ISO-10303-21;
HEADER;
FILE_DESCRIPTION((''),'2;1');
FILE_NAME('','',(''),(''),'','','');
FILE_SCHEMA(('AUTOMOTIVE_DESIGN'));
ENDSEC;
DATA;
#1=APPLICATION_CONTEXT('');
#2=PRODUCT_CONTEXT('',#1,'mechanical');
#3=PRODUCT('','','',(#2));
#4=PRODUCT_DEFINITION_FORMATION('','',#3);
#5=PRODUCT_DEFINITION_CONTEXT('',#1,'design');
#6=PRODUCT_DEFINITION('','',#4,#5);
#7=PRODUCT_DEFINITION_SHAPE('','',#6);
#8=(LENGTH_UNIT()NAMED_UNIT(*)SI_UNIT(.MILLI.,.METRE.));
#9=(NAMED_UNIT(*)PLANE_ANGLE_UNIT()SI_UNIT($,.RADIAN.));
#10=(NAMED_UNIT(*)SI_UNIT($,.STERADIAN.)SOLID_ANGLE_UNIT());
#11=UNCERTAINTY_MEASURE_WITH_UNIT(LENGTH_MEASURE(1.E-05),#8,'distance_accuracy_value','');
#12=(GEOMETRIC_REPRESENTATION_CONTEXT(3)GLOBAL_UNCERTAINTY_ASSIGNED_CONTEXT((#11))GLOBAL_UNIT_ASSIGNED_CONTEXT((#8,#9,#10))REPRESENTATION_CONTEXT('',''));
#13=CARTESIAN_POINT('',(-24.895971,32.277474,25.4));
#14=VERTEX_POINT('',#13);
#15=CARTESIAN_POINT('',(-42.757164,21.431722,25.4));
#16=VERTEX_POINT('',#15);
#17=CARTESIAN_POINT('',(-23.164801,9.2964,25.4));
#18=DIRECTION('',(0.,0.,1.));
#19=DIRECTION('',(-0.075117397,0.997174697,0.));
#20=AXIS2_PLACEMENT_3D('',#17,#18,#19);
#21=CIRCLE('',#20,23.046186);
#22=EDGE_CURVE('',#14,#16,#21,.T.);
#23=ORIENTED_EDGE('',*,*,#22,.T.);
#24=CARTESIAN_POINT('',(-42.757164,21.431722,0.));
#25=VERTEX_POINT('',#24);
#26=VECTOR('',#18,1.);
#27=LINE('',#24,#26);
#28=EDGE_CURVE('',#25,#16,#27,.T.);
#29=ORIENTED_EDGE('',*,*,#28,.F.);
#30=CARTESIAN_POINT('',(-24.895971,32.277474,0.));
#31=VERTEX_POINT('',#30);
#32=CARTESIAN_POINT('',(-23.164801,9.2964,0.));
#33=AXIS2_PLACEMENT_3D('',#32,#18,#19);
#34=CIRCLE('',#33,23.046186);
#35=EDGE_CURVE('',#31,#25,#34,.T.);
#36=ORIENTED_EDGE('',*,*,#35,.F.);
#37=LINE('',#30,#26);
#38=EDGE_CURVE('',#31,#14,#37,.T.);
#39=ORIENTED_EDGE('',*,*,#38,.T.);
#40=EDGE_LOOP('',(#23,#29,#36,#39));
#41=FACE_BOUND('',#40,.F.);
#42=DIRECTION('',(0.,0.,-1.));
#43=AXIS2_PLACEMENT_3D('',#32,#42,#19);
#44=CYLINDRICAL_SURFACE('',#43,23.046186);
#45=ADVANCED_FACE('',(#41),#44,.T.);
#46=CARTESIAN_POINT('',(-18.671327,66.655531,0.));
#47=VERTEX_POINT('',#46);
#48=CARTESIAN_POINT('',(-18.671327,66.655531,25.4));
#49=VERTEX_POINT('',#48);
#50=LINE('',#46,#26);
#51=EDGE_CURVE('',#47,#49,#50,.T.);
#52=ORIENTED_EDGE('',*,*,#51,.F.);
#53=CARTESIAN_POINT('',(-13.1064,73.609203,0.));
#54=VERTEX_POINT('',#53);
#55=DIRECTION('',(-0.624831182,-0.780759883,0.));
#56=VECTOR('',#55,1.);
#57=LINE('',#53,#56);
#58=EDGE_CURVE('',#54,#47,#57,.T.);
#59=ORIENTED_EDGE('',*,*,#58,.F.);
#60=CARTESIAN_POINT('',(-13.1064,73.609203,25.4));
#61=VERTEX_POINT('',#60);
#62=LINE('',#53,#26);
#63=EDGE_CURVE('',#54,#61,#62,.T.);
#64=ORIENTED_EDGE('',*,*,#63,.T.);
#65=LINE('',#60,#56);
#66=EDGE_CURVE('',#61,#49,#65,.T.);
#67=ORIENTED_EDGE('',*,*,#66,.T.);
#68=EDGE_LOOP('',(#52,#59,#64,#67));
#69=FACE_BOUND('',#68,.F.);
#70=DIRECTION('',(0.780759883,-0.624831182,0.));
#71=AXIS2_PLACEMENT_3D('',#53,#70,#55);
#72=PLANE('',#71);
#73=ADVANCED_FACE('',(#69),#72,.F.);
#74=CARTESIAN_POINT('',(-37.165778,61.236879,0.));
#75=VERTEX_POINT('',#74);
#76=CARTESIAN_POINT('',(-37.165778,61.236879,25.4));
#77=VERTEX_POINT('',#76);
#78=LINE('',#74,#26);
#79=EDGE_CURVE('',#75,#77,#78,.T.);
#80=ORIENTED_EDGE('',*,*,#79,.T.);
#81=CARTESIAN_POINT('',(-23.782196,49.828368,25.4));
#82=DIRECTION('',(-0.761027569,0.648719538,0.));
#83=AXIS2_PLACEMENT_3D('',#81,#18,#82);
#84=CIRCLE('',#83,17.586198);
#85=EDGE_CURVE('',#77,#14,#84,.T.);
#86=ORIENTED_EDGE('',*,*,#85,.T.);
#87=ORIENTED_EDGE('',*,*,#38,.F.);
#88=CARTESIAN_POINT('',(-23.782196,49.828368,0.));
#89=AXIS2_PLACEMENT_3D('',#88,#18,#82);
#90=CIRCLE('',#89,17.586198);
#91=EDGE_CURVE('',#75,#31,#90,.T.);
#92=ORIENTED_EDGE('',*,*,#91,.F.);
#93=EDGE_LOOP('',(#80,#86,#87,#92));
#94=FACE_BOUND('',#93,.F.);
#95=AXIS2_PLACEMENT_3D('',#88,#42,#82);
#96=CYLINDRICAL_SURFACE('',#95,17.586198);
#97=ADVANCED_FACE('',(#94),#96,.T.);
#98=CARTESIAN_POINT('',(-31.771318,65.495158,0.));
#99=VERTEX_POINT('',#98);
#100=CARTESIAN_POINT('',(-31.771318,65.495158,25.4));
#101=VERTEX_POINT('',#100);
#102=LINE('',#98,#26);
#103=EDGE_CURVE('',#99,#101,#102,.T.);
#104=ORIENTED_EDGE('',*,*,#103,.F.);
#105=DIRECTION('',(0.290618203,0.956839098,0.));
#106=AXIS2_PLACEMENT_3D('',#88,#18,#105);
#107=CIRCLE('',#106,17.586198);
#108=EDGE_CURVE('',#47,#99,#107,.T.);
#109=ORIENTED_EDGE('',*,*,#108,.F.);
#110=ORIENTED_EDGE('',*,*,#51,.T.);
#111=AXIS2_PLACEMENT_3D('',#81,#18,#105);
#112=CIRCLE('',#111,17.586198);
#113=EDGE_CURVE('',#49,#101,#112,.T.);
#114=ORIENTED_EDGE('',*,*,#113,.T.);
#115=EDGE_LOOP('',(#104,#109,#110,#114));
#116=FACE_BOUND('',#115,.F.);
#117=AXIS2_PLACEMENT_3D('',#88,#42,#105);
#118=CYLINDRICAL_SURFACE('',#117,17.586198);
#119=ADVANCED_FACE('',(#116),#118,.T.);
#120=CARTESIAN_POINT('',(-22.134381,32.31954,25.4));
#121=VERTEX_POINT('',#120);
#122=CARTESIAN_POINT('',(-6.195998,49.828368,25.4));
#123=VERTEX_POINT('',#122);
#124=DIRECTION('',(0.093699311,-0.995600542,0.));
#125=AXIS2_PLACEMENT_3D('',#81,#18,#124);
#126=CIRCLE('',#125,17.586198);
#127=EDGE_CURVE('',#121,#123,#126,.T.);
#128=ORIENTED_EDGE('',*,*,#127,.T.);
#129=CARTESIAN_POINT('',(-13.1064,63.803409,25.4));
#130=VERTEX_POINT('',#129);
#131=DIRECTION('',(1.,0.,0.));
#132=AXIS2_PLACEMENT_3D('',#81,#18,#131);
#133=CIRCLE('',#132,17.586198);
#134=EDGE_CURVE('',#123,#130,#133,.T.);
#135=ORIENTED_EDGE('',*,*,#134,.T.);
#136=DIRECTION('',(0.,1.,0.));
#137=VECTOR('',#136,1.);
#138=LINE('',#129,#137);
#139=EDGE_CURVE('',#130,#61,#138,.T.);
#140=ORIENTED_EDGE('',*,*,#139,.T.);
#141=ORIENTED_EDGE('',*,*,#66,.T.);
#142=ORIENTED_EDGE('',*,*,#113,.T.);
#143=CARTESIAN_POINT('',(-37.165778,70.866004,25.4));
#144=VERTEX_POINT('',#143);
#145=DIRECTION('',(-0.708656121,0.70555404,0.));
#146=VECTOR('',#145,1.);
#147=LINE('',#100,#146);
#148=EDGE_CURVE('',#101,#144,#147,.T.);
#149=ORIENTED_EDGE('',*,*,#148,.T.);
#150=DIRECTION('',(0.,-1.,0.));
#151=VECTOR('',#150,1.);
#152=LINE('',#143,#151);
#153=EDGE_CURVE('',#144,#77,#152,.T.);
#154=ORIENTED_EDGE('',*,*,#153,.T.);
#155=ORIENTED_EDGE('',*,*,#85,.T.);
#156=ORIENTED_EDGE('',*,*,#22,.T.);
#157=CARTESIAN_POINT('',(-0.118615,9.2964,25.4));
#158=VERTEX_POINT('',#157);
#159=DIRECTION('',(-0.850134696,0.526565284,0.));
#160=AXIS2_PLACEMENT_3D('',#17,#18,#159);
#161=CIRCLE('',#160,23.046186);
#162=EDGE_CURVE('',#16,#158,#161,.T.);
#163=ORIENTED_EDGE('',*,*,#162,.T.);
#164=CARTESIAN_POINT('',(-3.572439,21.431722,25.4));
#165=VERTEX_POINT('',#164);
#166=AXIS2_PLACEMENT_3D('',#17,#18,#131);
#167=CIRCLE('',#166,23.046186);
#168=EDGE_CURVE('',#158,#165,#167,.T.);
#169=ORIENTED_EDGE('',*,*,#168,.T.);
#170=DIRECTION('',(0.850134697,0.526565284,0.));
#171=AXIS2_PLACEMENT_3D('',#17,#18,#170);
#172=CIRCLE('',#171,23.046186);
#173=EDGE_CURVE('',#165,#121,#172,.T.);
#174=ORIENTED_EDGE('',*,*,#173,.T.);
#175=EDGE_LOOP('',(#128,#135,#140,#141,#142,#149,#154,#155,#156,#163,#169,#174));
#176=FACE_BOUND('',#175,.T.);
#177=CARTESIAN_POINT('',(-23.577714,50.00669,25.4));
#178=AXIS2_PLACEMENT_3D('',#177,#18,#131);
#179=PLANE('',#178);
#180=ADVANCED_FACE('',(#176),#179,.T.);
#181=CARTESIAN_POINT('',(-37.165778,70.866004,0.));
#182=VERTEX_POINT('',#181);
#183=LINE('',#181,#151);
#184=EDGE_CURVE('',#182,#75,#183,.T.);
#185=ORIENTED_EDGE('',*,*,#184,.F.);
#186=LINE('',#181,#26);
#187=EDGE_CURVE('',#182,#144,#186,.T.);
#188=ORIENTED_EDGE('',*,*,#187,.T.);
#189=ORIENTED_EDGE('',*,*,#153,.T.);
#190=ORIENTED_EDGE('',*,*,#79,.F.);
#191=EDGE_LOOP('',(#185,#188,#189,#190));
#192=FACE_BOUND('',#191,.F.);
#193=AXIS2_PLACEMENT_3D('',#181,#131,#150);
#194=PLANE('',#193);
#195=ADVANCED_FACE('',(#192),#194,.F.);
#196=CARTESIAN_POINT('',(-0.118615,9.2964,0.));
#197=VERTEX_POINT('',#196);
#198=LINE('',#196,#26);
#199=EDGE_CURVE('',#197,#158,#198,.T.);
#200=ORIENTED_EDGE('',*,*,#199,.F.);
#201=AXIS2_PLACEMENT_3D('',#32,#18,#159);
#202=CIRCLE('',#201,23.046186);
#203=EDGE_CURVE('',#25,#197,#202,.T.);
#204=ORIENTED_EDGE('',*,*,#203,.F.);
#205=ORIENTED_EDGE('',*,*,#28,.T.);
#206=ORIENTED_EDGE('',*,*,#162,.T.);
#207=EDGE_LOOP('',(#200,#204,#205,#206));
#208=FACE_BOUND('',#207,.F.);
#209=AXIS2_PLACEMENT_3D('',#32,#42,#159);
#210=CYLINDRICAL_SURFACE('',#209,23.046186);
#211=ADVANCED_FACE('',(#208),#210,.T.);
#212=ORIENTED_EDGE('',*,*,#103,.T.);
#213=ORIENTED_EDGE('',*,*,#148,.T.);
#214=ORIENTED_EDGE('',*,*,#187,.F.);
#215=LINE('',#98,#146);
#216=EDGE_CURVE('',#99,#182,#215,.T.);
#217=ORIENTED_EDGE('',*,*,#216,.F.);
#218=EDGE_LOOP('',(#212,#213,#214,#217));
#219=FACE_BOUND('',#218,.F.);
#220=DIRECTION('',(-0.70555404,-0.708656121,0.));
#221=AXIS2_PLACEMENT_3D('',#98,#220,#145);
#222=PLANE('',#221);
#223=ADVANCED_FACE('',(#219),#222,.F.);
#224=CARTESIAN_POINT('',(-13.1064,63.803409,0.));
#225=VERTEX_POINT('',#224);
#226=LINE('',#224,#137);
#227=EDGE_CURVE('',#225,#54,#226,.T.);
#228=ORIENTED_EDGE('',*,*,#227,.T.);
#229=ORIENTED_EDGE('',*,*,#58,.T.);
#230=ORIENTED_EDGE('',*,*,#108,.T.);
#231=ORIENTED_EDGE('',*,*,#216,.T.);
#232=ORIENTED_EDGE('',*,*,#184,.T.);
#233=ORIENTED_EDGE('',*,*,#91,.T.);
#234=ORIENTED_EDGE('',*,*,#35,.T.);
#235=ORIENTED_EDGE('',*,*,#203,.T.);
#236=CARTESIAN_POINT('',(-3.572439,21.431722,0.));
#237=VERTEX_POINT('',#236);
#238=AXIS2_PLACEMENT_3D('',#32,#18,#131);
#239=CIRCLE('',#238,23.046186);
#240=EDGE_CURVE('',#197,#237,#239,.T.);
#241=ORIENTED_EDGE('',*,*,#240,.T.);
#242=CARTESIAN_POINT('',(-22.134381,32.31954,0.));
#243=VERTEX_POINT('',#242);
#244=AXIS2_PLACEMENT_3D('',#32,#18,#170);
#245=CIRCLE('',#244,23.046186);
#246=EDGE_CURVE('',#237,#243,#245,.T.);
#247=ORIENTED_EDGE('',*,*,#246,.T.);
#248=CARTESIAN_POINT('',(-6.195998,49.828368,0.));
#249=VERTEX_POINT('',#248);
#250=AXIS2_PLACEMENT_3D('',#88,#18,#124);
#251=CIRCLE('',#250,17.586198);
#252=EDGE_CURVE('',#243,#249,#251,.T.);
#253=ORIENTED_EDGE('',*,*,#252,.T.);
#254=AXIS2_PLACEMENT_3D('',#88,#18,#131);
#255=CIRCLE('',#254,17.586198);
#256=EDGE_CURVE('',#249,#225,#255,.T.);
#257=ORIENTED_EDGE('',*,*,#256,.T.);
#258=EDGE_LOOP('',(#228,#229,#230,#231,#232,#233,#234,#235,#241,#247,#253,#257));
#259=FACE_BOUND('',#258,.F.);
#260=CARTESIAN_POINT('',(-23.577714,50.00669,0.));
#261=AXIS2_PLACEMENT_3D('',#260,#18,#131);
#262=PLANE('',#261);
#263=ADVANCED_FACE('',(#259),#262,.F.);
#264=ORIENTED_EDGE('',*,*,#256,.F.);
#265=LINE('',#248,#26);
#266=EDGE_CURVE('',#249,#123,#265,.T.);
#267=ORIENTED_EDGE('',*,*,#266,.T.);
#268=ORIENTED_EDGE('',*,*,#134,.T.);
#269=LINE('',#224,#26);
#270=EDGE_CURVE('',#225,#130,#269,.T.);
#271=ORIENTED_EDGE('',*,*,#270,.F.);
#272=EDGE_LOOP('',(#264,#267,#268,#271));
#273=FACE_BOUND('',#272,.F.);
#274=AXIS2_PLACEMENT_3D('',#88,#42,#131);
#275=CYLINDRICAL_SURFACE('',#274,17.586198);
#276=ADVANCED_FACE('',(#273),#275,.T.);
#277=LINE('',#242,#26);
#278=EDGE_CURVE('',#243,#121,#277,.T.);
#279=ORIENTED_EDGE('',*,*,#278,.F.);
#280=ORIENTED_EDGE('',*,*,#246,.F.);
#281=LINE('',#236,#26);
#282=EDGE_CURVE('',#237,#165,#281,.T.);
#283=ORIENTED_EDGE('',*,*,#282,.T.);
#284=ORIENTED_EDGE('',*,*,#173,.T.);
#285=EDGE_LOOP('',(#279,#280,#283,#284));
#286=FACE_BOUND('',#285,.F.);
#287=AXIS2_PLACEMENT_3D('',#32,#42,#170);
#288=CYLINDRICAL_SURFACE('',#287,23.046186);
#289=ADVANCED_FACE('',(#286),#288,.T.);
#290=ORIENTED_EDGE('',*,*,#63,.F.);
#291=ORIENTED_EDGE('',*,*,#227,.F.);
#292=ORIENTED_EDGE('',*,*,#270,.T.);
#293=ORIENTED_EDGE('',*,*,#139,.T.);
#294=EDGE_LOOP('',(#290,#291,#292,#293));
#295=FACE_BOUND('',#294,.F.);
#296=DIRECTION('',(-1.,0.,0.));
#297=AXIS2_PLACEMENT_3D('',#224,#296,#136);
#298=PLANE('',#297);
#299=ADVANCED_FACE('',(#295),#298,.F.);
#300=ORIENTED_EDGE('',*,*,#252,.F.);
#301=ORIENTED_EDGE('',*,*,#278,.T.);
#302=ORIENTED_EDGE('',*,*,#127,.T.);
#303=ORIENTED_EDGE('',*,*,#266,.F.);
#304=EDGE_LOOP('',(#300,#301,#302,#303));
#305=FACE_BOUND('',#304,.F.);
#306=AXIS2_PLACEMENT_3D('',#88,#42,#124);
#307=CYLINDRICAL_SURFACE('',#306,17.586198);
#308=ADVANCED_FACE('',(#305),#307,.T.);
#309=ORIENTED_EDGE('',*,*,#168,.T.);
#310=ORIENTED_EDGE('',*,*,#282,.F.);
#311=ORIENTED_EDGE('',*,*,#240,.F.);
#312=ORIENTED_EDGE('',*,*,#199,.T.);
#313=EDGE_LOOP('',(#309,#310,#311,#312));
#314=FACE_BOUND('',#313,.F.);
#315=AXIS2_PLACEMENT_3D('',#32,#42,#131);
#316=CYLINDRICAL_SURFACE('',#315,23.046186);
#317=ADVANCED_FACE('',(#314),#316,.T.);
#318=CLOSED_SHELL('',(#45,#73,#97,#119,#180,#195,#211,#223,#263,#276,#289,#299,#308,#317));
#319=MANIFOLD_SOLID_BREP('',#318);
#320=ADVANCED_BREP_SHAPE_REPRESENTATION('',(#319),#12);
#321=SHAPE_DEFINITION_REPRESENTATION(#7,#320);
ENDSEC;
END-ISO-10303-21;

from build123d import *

# Parameters (mm, degrees)
F0_R     = 3.3666282328
F0_R_2   = 4.2780726565
F1_DEPTH = 25.4


with BuildPart() as f1:
    # F0 (on Top) → F1 (new body)
    with BuildSketch(Plane.XY):
        with BuildLine():
            ThreePointArc((-22.1343814945, 32.3195395849), (-10.7773284043, 37.9899650978), (-6.1959977362, 49.8283682714))
            ThreePointArc((-6.1959977362, 49.8283682714), (-8.017979687, 57.6234855899), (-13.1064001471, 63.8034086848))
            ThreePointArc((-13.1064001471, 63.8034086848), (-15.7610771081, 65.4788003499), (-18.6713267733, 66.6555305166))
            ThreePointArc((-18.6713267733, 66.6555305166), (-25.3338728535, 67.3459786854), (-31.771318173, 65.4951581371))
            ThreePointArc((-31.771318173, 65.4951581371), (-34.6785879171, 63.6321004456), (-37.1657780069, 61.236878789))
            ThreePointArc((-37.1657780069, 61.236878789), (-39.9749449815, 42.9676641594), (-24.8959708176, 32.2774742434))
            ThreePointArc((-24.8959708176, 32.2774742434), (-23.515806874, 32.3399135434), (-22.1343814945, 32.3195395849))
        make_face()
        with Locations((-33.5280001163, 56.845203042)):
            Circle(F0_R, mode=Mode.SUBTRACT)
        with Locations((-18.897600472, 56.845203042)):
            Circle(F0_R_2, mode=Mode.SUBTRACT)
        with BuildLine():
            ThreePointArc((-18.6713267733, 66.6555305166), (-15.7610771081, 65.4788003499), (-13.1064001471, 63.8034086848))
            Line((-13.1064001471, 63.8034086848), (-13.1064001471, 73.6092031002))
            Line((-13.1064001471, 73.6092031002), (-18.6713267733, 66.6555305166))
        make_face()
        with BuildLine():
            ThreePointArc((-3.572438767, 21.4317220567), (-11.5045727225, 29.1751773236), (-22.1343814945, 32.3195395849))
            ThreePointArc((-22.1343814945, 32.3195395849), (-23.5143490847, 32.2442096875), (-24.8959708176, 32.2774742434))
            ThreePointArc((-24.8959708176, 32.2774742434), (-35.1264416512, 28.9952801275), (-42.7571638322, 21.4317220567))
            ThreePointArc((-42.7571638322, 21.4317220567), (-29.4734249224, -12.8695185824), (-0.1186150736, 9.2964004725))
            ThreePointArc((-0.1186150736, 9.2964004725), (-0.9988822447, 15.6050240953), (-3.572438767, 21.4317220567))
        make_face()
        with BuildLine():
            ThreePointArc((-24.8959708176, 32.2774742434), (-23.5143490847, 32.2442096875), (-22.1343814945, 32.3195395849))
            ThreePointArc((-22.1343814945, 32.3195395849), (-23.515806874, 32.3399135434), (-24.8959708176, 32.2774742434))
        make_face()
        with BuildLine():
            ThreePointArc((-37.1657780069, 61.236878789), (-34.6785879171, 63.6321004456), (-31.771318173, 65.4951581371))
            Line((-31.771318173, 65.4951581371), (-37.1657780069, 70.8660041886))
            Line((-37.1657780069, 70.8660041886), (-37.1657780069, 61.236878789))
        make_face()
        with Locations((-33.5280001163, 56.845203042)):
            Circle(F0_R)
        with Locations((-18.897600472, 56.845203042)):
            Circle(F0_R_2)
    extrude(amount=F1_DEPTH)


solid = f1.part
